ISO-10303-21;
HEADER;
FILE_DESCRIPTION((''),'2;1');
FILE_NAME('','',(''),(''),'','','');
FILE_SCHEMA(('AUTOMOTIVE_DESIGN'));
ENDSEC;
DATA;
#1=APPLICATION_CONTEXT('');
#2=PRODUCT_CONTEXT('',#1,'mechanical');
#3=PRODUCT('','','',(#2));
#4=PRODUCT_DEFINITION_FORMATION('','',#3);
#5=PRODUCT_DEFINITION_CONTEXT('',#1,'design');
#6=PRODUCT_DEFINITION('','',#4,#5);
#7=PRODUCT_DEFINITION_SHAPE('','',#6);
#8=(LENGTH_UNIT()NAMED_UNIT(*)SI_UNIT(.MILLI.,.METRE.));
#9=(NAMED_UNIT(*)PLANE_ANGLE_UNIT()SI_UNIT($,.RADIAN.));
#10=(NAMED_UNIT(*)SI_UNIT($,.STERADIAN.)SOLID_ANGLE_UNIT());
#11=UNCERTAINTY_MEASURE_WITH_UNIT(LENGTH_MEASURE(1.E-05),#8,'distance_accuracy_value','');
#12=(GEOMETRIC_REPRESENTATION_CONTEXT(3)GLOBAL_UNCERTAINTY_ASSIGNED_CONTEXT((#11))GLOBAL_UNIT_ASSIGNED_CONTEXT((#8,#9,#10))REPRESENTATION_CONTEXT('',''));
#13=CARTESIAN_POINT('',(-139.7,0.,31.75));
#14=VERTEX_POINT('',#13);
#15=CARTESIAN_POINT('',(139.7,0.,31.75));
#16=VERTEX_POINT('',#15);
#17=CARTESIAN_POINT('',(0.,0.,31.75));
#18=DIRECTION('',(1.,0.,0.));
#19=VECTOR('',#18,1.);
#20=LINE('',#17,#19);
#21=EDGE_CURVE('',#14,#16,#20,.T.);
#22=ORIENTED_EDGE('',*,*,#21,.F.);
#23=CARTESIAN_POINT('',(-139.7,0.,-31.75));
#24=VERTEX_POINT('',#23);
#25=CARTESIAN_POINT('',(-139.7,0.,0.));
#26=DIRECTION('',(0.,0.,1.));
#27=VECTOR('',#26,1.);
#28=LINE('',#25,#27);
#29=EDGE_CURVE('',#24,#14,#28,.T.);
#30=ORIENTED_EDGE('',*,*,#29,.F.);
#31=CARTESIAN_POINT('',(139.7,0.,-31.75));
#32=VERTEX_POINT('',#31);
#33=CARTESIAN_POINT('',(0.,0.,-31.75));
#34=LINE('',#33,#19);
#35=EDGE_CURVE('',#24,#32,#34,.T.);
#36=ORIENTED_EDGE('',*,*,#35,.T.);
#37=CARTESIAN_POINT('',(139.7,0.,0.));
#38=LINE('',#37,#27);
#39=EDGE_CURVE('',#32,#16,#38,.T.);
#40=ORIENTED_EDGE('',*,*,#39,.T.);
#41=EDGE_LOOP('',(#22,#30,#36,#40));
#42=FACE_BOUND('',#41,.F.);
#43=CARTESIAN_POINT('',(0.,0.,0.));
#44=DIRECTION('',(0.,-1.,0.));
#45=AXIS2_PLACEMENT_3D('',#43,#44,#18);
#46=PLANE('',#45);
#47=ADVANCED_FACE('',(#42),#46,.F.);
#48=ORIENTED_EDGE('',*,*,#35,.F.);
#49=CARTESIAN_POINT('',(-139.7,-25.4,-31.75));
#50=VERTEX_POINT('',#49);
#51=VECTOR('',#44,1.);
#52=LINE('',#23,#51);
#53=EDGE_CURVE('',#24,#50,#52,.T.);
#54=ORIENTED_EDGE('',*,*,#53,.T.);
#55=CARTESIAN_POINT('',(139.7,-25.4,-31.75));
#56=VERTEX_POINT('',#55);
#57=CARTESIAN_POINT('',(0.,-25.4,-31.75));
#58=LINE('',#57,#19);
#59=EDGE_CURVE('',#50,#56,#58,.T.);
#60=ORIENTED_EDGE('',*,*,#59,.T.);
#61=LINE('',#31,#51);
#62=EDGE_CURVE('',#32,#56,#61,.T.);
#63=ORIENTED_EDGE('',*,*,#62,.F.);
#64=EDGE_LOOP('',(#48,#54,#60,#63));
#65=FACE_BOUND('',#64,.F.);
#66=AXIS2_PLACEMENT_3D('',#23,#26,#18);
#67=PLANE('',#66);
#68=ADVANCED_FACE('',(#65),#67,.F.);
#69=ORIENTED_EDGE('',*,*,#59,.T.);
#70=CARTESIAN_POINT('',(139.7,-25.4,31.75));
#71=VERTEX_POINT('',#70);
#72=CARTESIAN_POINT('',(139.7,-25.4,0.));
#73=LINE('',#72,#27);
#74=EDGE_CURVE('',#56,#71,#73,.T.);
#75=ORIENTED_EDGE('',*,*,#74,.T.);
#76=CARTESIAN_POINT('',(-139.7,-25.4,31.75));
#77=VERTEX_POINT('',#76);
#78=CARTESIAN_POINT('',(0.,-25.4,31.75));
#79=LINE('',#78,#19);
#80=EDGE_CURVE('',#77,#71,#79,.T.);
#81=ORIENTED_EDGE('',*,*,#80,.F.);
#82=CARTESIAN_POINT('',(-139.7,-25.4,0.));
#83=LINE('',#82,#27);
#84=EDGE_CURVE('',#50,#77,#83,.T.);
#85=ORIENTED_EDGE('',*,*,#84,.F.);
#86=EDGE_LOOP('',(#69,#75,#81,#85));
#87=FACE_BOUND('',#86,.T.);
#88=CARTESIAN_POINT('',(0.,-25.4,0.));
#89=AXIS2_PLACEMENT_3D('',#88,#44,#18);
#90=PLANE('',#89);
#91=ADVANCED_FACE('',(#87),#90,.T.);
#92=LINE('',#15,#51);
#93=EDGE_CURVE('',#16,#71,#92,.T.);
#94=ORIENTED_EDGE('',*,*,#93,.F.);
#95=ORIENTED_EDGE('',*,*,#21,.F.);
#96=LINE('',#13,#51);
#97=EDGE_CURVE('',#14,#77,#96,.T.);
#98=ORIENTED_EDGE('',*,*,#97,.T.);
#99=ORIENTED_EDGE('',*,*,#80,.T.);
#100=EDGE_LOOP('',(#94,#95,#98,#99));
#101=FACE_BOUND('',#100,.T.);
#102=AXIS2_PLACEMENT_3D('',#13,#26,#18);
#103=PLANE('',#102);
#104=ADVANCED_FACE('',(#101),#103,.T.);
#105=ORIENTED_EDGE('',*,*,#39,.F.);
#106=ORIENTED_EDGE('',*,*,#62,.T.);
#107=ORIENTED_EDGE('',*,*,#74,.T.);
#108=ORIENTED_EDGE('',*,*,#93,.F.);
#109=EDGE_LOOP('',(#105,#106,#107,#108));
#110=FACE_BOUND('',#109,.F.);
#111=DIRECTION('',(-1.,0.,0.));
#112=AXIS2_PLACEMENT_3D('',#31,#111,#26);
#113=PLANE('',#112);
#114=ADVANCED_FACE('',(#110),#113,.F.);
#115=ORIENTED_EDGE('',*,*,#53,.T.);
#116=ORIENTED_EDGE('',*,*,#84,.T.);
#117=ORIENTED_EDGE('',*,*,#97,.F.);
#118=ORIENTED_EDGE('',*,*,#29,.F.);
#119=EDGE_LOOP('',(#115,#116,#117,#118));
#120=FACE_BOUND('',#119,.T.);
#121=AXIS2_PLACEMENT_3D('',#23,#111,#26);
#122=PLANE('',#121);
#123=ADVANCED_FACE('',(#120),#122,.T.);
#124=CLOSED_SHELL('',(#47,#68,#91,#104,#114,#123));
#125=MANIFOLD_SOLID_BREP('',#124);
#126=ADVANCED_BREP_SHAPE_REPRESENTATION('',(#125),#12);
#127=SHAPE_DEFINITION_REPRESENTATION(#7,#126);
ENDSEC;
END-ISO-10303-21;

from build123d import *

# Parameters (mm, degrees)
F0_W     = 279.4
F0_H     = 63.5
F2_DEPTH = 25.4


# Not quite as in the source:
# - the program builds the solid bodies; features that only make, move or delete a surface that nothing else refers to are left out


with BuildPart() as f2:
    # F0 (on Front) → F2 (new body)
    with BuildSketch(Plane.XZ):
        Rectangle(F0_W, F0_H)
    extrude(amount=F2_DEPTH)


solid = f2.part
